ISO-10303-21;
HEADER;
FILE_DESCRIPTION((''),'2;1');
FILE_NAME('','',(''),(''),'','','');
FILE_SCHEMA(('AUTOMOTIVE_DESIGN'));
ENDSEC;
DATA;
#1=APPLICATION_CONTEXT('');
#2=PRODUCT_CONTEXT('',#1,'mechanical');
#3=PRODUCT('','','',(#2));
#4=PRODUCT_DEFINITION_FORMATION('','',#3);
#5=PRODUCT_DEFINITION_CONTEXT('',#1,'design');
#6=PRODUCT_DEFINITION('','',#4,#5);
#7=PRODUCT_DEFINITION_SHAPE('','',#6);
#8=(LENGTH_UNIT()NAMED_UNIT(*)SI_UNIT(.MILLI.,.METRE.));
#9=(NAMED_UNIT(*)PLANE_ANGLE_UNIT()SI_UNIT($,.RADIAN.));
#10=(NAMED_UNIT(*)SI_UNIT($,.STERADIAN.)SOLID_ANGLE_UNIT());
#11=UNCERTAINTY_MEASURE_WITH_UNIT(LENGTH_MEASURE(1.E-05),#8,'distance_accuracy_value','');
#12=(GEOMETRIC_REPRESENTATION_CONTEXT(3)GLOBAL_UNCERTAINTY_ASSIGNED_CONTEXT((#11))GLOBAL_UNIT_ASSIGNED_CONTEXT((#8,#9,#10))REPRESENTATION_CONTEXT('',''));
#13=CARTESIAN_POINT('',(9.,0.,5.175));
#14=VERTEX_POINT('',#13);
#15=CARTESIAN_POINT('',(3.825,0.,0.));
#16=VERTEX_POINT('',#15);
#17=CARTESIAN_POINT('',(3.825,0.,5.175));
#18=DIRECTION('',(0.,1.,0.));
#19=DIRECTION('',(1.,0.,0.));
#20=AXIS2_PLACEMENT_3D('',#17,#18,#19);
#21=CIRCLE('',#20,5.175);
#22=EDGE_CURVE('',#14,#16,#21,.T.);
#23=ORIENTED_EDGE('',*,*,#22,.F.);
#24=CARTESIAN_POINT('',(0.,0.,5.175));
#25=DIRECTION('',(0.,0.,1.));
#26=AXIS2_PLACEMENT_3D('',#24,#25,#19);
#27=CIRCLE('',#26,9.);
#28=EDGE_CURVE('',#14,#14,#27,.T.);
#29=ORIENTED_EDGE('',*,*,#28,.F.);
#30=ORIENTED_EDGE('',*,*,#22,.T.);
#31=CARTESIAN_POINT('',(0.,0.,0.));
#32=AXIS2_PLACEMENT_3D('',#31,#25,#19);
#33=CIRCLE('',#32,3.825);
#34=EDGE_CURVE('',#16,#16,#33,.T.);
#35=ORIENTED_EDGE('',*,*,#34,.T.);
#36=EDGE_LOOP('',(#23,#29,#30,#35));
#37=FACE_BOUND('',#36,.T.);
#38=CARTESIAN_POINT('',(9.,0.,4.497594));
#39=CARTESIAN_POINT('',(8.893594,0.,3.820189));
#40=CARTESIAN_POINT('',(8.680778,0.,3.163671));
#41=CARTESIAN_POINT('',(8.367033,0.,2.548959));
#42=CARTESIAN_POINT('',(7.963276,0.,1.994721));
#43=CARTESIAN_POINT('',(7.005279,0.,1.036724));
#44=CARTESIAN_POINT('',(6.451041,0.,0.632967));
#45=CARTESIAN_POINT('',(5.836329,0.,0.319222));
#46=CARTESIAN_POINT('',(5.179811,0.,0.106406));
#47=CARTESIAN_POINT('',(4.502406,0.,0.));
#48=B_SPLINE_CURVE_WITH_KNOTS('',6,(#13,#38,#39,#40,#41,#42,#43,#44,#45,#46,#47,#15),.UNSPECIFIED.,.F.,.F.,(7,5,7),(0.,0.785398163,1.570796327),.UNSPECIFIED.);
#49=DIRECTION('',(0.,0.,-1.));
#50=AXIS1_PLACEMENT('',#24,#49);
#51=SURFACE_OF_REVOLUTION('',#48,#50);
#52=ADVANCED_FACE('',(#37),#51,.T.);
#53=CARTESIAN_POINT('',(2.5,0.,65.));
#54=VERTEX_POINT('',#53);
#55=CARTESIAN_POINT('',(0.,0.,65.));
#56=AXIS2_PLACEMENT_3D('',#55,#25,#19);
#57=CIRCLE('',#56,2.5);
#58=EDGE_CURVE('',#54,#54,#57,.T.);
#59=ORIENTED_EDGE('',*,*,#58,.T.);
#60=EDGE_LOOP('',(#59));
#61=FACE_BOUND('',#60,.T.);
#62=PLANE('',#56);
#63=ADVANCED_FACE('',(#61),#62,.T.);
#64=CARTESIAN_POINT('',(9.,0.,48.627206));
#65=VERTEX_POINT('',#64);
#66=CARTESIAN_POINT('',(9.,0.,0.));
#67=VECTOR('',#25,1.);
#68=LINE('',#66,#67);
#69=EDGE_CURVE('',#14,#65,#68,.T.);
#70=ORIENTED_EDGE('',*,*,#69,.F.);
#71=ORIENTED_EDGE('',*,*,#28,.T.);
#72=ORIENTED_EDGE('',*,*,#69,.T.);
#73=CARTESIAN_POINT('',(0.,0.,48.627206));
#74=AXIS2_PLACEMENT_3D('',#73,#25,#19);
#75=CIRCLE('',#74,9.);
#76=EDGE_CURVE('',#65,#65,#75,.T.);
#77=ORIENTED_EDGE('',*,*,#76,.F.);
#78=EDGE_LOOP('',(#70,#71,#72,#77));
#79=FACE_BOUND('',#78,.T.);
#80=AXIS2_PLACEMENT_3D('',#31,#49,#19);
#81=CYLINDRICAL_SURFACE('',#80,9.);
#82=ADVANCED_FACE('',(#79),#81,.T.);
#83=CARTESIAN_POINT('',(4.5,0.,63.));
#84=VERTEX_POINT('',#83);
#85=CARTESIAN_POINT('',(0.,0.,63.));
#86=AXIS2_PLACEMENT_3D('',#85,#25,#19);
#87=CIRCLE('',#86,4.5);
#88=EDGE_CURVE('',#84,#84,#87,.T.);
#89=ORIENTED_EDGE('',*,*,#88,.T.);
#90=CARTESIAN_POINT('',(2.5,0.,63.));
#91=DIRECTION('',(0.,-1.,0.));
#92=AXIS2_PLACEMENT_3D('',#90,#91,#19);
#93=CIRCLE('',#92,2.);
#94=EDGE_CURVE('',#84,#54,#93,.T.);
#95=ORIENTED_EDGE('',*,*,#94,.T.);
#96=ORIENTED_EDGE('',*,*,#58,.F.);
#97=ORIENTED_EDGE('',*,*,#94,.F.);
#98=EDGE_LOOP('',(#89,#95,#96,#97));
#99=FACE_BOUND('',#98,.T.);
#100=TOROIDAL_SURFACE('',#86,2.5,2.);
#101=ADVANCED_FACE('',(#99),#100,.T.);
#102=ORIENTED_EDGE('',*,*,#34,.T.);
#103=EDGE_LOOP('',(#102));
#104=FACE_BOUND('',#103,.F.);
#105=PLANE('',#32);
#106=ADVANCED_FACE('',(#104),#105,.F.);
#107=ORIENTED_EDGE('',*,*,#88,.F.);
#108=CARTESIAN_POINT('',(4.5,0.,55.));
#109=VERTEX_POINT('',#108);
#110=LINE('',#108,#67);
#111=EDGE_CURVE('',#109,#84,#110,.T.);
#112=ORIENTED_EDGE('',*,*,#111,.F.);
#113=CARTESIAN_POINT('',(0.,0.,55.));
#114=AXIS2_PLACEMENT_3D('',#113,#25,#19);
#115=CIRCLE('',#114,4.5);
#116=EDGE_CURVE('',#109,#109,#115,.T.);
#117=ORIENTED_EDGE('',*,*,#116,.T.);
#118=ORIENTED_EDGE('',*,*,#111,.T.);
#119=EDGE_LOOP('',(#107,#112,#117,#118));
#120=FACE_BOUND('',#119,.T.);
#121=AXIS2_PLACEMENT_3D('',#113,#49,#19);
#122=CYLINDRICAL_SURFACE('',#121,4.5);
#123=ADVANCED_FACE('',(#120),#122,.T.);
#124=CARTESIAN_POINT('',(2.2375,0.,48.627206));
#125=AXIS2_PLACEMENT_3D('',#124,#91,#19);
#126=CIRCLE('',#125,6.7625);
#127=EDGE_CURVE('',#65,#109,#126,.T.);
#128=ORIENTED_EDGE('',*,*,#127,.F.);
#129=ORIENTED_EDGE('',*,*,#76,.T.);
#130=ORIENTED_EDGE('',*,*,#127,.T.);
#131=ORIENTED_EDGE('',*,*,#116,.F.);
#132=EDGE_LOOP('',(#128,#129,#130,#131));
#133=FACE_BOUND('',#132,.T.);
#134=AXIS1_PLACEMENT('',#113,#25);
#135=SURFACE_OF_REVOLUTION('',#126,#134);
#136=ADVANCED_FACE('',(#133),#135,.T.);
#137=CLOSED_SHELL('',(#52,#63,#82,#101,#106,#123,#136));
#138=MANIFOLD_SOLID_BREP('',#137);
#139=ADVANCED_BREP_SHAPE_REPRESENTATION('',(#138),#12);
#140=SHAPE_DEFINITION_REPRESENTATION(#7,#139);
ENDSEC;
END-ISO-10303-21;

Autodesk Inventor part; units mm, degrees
ref_plane "YZ Plane" through (0, 0, 0) normal (1, 0, 0) x (0, 1, 0)
ref_plane "XZ Plane" through (0, 0, 0) normal (0, 1, 0) x (-1, 0, 0)
ref_plane "XY Plane" through (0, 0, 0) normal (0, 0, 1) x (1, 0, 0)
sketch "Sketch1" plane through (0, 0, 0) normal (0, 0, 1) x (1, 0, 0)
  circle A0 centre (0, 0) radius 9
  circle A1 centre (0, 0) radius 4.5
  dimension "d0" = 18
  dimension "d1" = 9
extrude "Extrusion1" add sketch "Sketch1" along normal blind 55 contours A0 | A1
sketch "Sketch2" plane through (0, 0, 55) normal (0, 0, 1) x (1, 0, 0)
  circle A0 centre (0, 0) radius 4.5
  dimension "d4" = 9
extrude "Extrusion2" add sketch "Sketch2" along normal blind 10
fillet "Fillet1" radius 6.7625 1 edges at (-9, 0, 55)
fillet "Fillet2" radius 2 1 edges at (-4.5, 0, 65)
fillet "Fillet3" radius 5.175 1 edges at (-9, 0, 0)
properties part number "8g_CO2_Cylinder"
